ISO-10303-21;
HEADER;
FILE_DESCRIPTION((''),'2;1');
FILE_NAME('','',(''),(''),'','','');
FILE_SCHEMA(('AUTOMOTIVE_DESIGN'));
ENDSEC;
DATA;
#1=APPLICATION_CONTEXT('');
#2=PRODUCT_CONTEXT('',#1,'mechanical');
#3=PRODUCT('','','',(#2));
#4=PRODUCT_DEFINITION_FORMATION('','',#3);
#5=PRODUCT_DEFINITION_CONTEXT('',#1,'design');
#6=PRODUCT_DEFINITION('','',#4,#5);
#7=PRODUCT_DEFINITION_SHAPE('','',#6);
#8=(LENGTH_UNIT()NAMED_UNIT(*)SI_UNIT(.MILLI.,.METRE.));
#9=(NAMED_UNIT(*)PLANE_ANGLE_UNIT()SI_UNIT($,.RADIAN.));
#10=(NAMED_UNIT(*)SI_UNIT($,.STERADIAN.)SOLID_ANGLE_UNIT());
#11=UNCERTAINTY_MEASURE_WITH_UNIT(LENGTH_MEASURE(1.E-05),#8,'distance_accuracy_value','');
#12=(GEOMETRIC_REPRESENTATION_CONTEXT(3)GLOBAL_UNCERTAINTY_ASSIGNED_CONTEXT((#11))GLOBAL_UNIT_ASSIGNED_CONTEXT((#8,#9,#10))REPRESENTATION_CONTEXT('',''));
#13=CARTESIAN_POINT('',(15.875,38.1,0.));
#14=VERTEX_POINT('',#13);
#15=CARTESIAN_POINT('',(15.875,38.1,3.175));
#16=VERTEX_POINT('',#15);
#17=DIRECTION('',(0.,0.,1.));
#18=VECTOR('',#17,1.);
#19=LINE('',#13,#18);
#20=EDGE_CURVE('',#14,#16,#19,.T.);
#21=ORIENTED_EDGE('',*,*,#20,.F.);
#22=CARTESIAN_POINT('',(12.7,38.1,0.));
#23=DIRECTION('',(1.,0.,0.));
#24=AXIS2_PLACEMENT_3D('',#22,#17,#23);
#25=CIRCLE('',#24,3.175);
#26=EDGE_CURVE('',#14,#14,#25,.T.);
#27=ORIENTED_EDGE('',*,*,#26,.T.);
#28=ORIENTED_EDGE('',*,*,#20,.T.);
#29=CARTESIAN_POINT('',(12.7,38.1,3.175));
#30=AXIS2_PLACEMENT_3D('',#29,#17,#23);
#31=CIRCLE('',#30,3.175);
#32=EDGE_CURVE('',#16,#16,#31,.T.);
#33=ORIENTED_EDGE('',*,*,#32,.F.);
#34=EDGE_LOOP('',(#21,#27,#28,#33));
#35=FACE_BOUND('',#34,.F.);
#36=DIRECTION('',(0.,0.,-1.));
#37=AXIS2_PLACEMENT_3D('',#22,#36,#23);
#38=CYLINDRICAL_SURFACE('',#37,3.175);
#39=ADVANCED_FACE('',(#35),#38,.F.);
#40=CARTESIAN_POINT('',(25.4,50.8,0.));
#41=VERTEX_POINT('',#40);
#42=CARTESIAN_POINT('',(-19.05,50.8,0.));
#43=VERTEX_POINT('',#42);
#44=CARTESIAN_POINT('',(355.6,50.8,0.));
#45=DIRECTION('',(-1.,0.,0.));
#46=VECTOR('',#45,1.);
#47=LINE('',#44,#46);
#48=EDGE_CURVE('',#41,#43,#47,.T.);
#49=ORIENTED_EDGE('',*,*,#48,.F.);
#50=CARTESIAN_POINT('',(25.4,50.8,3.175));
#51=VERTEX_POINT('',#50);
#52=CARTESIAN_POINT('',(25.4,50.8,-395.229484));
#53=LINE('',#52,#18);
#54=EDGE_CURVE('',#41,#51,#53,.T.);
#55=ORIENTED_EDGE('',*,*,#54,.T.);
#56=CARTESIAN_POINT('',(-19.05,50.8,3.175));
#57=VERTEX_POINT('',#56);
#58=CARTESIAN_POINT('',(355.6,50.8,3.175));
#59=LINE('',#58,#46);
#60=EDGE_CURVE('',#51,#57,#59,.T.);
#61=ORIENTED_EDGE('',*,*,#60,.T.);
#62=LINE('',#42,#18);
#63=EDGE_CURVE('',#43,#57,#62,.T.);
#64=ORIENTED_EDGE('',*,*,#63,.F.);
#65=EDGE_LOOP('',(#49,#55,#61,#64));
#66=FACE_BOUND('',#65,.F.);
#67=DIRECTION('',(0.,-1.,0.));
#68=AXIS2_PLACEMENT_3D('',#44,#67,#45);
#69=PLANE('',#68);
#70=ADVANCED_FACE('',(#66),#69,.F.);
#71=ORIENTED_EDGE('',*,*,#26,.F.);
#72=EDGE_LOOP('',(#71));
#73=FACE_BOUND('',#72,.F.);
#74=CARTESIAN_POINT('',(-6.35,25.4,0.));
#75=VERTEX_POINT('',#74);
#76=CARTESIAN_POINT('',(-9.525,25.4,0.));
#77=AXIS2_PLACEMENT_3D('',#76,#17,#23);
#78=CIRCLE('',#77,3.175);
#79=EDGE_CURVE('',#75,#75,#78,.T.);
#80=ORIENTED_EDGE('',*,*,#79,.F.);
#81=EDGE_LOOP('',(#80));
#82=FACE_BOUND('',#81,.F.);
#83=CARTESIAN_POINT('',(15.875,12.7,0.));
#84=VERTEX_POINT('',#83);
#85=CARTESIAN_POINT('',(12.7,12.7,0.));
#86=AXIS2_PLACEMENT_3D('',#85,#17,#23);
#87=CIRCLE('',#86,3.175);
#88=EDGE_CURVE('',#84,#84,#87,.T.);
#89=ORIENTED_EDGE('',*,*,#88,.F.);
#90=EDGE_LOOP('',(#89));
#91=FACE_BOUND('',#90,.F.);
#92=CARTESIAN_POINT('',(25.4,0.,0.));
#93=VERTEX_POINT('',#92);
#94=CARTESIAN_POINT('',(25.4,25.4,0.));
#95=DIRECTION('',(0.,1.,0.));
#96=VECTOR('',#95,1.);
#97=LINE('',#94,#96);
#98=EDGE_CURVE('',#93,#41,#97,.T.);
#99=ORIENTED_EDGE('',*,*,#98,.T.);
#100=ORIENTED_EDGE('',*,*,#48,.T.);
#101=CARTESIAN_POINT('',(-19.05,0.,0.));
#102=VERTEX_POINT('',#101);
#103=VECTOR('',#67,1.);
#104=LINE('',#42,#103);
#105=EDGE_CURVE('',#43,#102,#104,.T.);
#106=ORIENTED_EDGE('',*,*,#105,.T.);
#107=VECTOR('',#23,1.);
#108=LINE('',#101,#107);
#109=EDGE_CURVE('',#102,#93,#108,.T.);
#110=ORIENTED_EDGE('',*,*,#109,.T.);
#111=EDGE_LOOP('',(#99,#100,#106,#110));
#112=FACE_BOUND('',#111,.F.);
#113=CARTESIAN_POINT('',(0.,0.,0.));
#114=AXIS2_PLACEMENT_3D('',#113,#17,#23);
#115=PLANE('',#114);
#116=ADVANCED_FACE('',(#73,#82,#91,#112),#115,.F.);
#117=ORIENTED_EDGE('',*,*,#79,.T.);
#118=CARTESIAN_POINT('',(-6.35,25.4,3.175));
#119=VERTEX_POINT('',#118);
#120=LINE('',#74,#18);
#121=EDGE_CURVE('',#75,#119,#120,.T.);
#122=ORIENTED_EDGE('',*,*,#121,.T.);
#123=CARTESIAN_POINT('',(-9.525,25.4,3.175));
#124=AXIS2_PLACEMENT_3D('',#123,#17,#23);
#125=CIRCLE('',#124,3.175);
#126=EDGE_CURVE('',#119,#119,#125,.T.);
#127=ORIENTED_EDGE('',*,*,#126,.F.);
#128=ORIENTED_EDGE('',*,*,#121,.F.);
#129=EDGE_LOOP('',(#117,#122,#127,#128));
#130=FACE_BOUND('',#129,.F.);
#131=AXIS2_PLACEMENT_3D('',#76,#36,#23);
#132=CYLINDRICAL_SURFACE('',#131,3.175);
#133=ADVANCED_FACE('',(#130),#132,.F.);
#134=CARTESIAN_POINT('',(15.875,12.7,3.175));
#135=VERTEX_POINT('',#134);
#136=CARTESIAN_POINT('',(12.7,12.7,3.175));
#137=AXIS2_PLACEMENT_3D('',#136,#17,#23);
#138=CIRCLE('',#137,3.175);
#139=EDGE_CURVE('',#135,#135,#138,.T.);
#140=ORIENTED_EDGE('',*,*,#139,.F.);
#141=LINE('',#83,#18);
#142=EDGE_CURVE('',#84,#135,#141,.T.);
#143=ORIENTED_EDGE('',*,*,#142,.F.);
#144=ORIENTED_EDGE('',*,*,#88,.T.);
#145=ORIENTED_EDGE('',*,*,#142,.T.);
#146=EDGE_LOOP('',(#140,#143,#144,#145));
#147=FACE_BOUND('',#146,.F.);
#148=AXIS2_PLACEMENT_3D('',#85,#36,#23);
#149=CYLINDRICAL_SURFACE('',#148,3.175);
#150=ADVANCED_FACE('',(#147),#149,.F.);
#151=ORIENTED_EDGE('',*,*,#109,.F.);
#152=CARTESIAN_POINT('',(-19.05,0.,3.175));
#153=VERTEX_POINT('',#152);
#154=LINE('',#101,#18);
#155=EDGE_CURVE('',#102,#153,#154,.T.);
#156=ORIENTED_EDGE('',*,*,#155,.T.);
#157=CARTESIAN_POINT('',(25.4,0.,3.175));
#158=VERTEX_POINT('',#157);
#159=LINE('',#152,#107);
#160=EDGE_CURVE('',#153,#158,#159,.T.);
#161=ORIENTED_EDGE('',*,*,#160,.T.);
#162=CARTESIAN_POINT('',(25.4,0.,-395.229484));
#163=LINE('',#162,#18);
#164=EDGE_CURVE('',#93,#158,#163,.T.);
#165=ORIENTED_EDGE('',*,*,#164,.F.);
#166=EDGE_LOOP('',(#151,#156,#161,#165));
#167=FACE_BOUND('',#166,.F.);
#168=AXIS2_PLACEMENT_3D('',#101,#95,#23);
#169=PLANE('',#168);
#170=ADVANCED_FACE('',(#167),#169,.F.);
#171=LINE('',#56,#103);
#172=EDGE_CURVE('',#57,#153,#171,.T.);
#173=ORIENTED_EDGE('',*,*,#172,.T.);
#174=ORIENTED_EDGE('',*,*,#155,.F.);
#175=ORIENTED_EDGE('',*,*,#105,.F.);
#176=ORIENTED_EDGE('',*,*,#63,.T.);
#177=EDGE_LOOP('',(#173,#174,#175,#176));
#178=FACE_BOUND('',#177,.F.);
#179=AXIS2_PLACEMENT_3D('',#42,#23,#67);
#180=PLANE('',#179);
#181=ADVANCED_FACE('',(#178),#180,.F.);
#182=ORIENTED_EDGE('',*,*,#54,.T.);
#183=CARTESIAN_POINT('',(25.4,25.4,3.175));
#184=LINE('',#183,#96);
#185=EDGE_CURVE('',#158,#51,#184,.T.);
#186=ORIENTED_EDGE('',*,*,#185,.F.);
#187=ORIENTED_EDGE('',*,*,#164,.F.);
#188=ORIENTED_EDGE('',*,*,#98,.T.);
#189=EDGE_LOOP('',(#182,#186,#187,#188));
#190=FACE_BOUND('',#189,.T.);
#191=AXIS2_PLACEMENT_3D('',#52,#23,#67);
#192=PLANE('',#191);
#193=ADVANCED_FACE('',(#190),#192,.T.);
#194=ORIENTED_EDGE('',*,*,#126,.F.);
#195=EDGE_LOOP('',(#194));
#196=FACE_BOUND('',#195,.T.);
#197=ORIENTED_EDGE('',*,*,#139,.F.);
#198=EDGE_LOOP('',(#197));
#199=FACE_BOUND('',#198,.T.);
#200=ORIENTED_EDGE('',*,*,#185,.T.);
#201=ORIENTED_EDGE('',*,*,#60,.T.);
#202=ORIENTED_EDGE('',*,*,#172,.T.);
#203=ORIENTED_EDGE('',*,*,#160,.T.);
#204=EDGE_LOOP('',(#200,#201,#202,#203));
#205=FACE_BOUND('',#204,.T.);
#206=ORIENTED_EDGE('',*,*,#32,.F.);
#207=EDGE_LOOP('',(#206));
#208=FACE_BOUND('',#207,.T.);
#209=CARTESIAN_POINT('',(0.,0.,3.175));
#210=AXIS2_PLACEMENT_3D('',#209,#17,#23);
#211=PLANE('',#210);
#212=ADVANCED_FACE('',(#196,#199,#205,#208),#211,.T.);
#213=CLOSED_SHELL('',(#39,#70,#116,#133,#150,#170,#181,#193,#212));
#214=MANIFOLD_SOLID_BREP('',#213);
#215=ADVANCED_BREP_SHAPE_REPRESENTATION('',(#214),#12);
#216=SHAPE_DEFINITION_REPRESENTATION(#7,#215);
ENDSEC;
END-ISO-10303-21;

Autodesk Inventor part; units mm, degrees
ref_plane "YZ Plane" through (0, 0, 0) normal (1, 0, 0) x (0, 1, 0)
ref_plane "XZ Plane" through (0, 0, 0) normal (0, 1, 0) x (-1, 0, 0)
ref_plane "XY Plane" through (0, 0, 0) normal (0, 0, 1) x (1, 0, 0)
sketch "Sketch1" plane through (0, 0, 0) normal (0, 0, 1) x (1, 0, 0)
  line L0 (355.6, 50.8) -> (-19.05, 50.8)
  line L1 (12.7, 50.8) -> (12.7, 0) construction
  line L2 (0, 38.1) -> (12.7, 38.1) construction
  line L3 (0, 12.7) -> (12.7, 12.7) construction
  circle A0 centre (12.7, 38.1) radius 3.175
  circle A1 centre (12.7, 12.7) radius 3.175
  line L4 (168.275, 50.8) -> (168.275, 0) construction
  line L5 (-19.05, 50.8) -> (-19.05, 0)
  line L6 (355.6, 50.8) -> (355.6, 0)
  circle A2 centre (-9.525, 25.4) radius 3.175
  circle A3 centre (323.85, 38.1) radius 3.175
  circle A4 centre (323.85, 12.7) radius 3.175
  line L7 (355.6, 50.8) -> (355.6, 0)
  circle A5 centre (346.075, 25.4) radius 3.175
  line L8 (-19.05, 0) -> (355.6, 0)
  dimension "d0" = 374.65
  dimension "d3" = 12.7
  dimension "d4" = 25.4
  dimension "d5" = 6.35
  dimension "d6" = 6.35
  dimension "d10" = 6.35
  dimension "d11" = 31.75
extrude "Extrusion2" add sketch "Sketch1" along normal blind 3.175
sketch "Sketch3" plane through (0, 0, 3.175) normal (0, 0, 1) x (1, 0, 0)
  line L0 (-19.05, 50.8) -> (-19.05, 0) projected
  line L1 (-19.05, 25.4) -> (168.275, 25.4)
  line L2 (355.6, 50.8) -> (-19.05, 50.8) projected
  line L3 (168.275, 25.4) -> (168.275, 50.8)
  point P0 (0, 0)
hole "Hole1" at (168.275, 25.4, 3.175) direction (0, 0, -1) diameter 22.86 depth 25.4 tip angle 118
sketch "Sketch4" plane through (0, 0, 3.175) normal (0, 0, 1) x (1, 0, 0)
  circle A0 centre (168.275, 25.4) radius 11.43 projected
  line L0 (168.275, 25.4) -> (142.875, 25.4)
  circle A1 centre (142.875, 25.4) radius 3.175
  line L1 (355.6, 50.8) -> (-19.05, 50.8) projected
  line L2 (168.275, 50.8) -> (168.275, 0)
  circle A2 centre (193.675, 25.4) radius 3.175
  point P0 (0, 0)
  dimension "d21" = 25.4
  dimension "d22" = 6.35
hole "Hole2" at (193.675, 25.4, 3.175) at (142.875, 25.4, 3.175) direction (0, 0, -1) diameter 6.35 depth 25.4 tip angle 118
sketch "Sketch5" plane through (0, 0, 3.175) normal (0, 0, 1) x (1, 0, 0)
  line L0 (355.6, 50.8) -> (-19.05, 50.8) projected
  line L1 (74.6506, 50.8) -> (74.6506, 0)
  line L2 (-19.05, 50.8) -> (-19.05, 0) projected
  line L3 (74.6506, 50.8) -> (74.6506, 44.45)
  line L4 (74.6506, 44.45) -> (74.6506, 25.4)
  circle A0 centre (74.6506, 44.45) radius 2.0701
  line L5 (74.6506, 25.4) -> (74.6506, 6.35)
  circle A1 centre (74.6506, 25.4) radius 2.0701
  circle A2 centre (74.6506, 6.35) radius 2.0701
  line L6 (168.275, 50.8) -> (168.275, 0)
  circle A3 centre (261.8994, 44.45) radius 2.0701
  circle A4 centre (261.8994, 25.4) radius 2.0701
  circle A5 centre (261.8994, 6.35) radius 2.0701
  point P0 (0, 0)
  dimension "d30" = 93.7006
  dimension "d31" = 6.35
  dimension "d32" = 19.05
  dimension "d33" = 4.1402
  dimension "d34" = 19.05
  dimension "d35" = 4.1402
  dimension "d36" = 4.1402
hole "Hole3" at (74.6506, 44.45, 3.175) at (74.6506, 25.4, 3.175) at (74.6506, 6.35, 3.175) at (261.8994, 44.45, 3.175) at (261.8994, 25.4, 3.175) at (261.8994, 6.35, 3.175) direction (0, 0, -1) diameter 4.1402 depth 25.4 tip angle 118
sketch "Sketch6" plane through (0, 0, 3.175) normal (0, 0, 1) x (1, 0, 0)
  circle A0 centre (12.7, 38.1) radius 3.175 projected
  line L0 (12.7, 38.1) -> (25.4, 38.1)
  line L1 (355.6, 50.8) -> (-19.05, 50.8) projected
  line L2 (25.4, 50.8) -> (25.4, 0)
  point P0 (0, 0)
  dimension "d44" = 12.7
split body "Split1" sketch "Sketch6" result one side removed curves L2 removed pieces at (41.1319, 25.4832, 0.5)
properties part number "2AM-17-P-0206 - moving support slider panl" material "Aluminum 6061"
